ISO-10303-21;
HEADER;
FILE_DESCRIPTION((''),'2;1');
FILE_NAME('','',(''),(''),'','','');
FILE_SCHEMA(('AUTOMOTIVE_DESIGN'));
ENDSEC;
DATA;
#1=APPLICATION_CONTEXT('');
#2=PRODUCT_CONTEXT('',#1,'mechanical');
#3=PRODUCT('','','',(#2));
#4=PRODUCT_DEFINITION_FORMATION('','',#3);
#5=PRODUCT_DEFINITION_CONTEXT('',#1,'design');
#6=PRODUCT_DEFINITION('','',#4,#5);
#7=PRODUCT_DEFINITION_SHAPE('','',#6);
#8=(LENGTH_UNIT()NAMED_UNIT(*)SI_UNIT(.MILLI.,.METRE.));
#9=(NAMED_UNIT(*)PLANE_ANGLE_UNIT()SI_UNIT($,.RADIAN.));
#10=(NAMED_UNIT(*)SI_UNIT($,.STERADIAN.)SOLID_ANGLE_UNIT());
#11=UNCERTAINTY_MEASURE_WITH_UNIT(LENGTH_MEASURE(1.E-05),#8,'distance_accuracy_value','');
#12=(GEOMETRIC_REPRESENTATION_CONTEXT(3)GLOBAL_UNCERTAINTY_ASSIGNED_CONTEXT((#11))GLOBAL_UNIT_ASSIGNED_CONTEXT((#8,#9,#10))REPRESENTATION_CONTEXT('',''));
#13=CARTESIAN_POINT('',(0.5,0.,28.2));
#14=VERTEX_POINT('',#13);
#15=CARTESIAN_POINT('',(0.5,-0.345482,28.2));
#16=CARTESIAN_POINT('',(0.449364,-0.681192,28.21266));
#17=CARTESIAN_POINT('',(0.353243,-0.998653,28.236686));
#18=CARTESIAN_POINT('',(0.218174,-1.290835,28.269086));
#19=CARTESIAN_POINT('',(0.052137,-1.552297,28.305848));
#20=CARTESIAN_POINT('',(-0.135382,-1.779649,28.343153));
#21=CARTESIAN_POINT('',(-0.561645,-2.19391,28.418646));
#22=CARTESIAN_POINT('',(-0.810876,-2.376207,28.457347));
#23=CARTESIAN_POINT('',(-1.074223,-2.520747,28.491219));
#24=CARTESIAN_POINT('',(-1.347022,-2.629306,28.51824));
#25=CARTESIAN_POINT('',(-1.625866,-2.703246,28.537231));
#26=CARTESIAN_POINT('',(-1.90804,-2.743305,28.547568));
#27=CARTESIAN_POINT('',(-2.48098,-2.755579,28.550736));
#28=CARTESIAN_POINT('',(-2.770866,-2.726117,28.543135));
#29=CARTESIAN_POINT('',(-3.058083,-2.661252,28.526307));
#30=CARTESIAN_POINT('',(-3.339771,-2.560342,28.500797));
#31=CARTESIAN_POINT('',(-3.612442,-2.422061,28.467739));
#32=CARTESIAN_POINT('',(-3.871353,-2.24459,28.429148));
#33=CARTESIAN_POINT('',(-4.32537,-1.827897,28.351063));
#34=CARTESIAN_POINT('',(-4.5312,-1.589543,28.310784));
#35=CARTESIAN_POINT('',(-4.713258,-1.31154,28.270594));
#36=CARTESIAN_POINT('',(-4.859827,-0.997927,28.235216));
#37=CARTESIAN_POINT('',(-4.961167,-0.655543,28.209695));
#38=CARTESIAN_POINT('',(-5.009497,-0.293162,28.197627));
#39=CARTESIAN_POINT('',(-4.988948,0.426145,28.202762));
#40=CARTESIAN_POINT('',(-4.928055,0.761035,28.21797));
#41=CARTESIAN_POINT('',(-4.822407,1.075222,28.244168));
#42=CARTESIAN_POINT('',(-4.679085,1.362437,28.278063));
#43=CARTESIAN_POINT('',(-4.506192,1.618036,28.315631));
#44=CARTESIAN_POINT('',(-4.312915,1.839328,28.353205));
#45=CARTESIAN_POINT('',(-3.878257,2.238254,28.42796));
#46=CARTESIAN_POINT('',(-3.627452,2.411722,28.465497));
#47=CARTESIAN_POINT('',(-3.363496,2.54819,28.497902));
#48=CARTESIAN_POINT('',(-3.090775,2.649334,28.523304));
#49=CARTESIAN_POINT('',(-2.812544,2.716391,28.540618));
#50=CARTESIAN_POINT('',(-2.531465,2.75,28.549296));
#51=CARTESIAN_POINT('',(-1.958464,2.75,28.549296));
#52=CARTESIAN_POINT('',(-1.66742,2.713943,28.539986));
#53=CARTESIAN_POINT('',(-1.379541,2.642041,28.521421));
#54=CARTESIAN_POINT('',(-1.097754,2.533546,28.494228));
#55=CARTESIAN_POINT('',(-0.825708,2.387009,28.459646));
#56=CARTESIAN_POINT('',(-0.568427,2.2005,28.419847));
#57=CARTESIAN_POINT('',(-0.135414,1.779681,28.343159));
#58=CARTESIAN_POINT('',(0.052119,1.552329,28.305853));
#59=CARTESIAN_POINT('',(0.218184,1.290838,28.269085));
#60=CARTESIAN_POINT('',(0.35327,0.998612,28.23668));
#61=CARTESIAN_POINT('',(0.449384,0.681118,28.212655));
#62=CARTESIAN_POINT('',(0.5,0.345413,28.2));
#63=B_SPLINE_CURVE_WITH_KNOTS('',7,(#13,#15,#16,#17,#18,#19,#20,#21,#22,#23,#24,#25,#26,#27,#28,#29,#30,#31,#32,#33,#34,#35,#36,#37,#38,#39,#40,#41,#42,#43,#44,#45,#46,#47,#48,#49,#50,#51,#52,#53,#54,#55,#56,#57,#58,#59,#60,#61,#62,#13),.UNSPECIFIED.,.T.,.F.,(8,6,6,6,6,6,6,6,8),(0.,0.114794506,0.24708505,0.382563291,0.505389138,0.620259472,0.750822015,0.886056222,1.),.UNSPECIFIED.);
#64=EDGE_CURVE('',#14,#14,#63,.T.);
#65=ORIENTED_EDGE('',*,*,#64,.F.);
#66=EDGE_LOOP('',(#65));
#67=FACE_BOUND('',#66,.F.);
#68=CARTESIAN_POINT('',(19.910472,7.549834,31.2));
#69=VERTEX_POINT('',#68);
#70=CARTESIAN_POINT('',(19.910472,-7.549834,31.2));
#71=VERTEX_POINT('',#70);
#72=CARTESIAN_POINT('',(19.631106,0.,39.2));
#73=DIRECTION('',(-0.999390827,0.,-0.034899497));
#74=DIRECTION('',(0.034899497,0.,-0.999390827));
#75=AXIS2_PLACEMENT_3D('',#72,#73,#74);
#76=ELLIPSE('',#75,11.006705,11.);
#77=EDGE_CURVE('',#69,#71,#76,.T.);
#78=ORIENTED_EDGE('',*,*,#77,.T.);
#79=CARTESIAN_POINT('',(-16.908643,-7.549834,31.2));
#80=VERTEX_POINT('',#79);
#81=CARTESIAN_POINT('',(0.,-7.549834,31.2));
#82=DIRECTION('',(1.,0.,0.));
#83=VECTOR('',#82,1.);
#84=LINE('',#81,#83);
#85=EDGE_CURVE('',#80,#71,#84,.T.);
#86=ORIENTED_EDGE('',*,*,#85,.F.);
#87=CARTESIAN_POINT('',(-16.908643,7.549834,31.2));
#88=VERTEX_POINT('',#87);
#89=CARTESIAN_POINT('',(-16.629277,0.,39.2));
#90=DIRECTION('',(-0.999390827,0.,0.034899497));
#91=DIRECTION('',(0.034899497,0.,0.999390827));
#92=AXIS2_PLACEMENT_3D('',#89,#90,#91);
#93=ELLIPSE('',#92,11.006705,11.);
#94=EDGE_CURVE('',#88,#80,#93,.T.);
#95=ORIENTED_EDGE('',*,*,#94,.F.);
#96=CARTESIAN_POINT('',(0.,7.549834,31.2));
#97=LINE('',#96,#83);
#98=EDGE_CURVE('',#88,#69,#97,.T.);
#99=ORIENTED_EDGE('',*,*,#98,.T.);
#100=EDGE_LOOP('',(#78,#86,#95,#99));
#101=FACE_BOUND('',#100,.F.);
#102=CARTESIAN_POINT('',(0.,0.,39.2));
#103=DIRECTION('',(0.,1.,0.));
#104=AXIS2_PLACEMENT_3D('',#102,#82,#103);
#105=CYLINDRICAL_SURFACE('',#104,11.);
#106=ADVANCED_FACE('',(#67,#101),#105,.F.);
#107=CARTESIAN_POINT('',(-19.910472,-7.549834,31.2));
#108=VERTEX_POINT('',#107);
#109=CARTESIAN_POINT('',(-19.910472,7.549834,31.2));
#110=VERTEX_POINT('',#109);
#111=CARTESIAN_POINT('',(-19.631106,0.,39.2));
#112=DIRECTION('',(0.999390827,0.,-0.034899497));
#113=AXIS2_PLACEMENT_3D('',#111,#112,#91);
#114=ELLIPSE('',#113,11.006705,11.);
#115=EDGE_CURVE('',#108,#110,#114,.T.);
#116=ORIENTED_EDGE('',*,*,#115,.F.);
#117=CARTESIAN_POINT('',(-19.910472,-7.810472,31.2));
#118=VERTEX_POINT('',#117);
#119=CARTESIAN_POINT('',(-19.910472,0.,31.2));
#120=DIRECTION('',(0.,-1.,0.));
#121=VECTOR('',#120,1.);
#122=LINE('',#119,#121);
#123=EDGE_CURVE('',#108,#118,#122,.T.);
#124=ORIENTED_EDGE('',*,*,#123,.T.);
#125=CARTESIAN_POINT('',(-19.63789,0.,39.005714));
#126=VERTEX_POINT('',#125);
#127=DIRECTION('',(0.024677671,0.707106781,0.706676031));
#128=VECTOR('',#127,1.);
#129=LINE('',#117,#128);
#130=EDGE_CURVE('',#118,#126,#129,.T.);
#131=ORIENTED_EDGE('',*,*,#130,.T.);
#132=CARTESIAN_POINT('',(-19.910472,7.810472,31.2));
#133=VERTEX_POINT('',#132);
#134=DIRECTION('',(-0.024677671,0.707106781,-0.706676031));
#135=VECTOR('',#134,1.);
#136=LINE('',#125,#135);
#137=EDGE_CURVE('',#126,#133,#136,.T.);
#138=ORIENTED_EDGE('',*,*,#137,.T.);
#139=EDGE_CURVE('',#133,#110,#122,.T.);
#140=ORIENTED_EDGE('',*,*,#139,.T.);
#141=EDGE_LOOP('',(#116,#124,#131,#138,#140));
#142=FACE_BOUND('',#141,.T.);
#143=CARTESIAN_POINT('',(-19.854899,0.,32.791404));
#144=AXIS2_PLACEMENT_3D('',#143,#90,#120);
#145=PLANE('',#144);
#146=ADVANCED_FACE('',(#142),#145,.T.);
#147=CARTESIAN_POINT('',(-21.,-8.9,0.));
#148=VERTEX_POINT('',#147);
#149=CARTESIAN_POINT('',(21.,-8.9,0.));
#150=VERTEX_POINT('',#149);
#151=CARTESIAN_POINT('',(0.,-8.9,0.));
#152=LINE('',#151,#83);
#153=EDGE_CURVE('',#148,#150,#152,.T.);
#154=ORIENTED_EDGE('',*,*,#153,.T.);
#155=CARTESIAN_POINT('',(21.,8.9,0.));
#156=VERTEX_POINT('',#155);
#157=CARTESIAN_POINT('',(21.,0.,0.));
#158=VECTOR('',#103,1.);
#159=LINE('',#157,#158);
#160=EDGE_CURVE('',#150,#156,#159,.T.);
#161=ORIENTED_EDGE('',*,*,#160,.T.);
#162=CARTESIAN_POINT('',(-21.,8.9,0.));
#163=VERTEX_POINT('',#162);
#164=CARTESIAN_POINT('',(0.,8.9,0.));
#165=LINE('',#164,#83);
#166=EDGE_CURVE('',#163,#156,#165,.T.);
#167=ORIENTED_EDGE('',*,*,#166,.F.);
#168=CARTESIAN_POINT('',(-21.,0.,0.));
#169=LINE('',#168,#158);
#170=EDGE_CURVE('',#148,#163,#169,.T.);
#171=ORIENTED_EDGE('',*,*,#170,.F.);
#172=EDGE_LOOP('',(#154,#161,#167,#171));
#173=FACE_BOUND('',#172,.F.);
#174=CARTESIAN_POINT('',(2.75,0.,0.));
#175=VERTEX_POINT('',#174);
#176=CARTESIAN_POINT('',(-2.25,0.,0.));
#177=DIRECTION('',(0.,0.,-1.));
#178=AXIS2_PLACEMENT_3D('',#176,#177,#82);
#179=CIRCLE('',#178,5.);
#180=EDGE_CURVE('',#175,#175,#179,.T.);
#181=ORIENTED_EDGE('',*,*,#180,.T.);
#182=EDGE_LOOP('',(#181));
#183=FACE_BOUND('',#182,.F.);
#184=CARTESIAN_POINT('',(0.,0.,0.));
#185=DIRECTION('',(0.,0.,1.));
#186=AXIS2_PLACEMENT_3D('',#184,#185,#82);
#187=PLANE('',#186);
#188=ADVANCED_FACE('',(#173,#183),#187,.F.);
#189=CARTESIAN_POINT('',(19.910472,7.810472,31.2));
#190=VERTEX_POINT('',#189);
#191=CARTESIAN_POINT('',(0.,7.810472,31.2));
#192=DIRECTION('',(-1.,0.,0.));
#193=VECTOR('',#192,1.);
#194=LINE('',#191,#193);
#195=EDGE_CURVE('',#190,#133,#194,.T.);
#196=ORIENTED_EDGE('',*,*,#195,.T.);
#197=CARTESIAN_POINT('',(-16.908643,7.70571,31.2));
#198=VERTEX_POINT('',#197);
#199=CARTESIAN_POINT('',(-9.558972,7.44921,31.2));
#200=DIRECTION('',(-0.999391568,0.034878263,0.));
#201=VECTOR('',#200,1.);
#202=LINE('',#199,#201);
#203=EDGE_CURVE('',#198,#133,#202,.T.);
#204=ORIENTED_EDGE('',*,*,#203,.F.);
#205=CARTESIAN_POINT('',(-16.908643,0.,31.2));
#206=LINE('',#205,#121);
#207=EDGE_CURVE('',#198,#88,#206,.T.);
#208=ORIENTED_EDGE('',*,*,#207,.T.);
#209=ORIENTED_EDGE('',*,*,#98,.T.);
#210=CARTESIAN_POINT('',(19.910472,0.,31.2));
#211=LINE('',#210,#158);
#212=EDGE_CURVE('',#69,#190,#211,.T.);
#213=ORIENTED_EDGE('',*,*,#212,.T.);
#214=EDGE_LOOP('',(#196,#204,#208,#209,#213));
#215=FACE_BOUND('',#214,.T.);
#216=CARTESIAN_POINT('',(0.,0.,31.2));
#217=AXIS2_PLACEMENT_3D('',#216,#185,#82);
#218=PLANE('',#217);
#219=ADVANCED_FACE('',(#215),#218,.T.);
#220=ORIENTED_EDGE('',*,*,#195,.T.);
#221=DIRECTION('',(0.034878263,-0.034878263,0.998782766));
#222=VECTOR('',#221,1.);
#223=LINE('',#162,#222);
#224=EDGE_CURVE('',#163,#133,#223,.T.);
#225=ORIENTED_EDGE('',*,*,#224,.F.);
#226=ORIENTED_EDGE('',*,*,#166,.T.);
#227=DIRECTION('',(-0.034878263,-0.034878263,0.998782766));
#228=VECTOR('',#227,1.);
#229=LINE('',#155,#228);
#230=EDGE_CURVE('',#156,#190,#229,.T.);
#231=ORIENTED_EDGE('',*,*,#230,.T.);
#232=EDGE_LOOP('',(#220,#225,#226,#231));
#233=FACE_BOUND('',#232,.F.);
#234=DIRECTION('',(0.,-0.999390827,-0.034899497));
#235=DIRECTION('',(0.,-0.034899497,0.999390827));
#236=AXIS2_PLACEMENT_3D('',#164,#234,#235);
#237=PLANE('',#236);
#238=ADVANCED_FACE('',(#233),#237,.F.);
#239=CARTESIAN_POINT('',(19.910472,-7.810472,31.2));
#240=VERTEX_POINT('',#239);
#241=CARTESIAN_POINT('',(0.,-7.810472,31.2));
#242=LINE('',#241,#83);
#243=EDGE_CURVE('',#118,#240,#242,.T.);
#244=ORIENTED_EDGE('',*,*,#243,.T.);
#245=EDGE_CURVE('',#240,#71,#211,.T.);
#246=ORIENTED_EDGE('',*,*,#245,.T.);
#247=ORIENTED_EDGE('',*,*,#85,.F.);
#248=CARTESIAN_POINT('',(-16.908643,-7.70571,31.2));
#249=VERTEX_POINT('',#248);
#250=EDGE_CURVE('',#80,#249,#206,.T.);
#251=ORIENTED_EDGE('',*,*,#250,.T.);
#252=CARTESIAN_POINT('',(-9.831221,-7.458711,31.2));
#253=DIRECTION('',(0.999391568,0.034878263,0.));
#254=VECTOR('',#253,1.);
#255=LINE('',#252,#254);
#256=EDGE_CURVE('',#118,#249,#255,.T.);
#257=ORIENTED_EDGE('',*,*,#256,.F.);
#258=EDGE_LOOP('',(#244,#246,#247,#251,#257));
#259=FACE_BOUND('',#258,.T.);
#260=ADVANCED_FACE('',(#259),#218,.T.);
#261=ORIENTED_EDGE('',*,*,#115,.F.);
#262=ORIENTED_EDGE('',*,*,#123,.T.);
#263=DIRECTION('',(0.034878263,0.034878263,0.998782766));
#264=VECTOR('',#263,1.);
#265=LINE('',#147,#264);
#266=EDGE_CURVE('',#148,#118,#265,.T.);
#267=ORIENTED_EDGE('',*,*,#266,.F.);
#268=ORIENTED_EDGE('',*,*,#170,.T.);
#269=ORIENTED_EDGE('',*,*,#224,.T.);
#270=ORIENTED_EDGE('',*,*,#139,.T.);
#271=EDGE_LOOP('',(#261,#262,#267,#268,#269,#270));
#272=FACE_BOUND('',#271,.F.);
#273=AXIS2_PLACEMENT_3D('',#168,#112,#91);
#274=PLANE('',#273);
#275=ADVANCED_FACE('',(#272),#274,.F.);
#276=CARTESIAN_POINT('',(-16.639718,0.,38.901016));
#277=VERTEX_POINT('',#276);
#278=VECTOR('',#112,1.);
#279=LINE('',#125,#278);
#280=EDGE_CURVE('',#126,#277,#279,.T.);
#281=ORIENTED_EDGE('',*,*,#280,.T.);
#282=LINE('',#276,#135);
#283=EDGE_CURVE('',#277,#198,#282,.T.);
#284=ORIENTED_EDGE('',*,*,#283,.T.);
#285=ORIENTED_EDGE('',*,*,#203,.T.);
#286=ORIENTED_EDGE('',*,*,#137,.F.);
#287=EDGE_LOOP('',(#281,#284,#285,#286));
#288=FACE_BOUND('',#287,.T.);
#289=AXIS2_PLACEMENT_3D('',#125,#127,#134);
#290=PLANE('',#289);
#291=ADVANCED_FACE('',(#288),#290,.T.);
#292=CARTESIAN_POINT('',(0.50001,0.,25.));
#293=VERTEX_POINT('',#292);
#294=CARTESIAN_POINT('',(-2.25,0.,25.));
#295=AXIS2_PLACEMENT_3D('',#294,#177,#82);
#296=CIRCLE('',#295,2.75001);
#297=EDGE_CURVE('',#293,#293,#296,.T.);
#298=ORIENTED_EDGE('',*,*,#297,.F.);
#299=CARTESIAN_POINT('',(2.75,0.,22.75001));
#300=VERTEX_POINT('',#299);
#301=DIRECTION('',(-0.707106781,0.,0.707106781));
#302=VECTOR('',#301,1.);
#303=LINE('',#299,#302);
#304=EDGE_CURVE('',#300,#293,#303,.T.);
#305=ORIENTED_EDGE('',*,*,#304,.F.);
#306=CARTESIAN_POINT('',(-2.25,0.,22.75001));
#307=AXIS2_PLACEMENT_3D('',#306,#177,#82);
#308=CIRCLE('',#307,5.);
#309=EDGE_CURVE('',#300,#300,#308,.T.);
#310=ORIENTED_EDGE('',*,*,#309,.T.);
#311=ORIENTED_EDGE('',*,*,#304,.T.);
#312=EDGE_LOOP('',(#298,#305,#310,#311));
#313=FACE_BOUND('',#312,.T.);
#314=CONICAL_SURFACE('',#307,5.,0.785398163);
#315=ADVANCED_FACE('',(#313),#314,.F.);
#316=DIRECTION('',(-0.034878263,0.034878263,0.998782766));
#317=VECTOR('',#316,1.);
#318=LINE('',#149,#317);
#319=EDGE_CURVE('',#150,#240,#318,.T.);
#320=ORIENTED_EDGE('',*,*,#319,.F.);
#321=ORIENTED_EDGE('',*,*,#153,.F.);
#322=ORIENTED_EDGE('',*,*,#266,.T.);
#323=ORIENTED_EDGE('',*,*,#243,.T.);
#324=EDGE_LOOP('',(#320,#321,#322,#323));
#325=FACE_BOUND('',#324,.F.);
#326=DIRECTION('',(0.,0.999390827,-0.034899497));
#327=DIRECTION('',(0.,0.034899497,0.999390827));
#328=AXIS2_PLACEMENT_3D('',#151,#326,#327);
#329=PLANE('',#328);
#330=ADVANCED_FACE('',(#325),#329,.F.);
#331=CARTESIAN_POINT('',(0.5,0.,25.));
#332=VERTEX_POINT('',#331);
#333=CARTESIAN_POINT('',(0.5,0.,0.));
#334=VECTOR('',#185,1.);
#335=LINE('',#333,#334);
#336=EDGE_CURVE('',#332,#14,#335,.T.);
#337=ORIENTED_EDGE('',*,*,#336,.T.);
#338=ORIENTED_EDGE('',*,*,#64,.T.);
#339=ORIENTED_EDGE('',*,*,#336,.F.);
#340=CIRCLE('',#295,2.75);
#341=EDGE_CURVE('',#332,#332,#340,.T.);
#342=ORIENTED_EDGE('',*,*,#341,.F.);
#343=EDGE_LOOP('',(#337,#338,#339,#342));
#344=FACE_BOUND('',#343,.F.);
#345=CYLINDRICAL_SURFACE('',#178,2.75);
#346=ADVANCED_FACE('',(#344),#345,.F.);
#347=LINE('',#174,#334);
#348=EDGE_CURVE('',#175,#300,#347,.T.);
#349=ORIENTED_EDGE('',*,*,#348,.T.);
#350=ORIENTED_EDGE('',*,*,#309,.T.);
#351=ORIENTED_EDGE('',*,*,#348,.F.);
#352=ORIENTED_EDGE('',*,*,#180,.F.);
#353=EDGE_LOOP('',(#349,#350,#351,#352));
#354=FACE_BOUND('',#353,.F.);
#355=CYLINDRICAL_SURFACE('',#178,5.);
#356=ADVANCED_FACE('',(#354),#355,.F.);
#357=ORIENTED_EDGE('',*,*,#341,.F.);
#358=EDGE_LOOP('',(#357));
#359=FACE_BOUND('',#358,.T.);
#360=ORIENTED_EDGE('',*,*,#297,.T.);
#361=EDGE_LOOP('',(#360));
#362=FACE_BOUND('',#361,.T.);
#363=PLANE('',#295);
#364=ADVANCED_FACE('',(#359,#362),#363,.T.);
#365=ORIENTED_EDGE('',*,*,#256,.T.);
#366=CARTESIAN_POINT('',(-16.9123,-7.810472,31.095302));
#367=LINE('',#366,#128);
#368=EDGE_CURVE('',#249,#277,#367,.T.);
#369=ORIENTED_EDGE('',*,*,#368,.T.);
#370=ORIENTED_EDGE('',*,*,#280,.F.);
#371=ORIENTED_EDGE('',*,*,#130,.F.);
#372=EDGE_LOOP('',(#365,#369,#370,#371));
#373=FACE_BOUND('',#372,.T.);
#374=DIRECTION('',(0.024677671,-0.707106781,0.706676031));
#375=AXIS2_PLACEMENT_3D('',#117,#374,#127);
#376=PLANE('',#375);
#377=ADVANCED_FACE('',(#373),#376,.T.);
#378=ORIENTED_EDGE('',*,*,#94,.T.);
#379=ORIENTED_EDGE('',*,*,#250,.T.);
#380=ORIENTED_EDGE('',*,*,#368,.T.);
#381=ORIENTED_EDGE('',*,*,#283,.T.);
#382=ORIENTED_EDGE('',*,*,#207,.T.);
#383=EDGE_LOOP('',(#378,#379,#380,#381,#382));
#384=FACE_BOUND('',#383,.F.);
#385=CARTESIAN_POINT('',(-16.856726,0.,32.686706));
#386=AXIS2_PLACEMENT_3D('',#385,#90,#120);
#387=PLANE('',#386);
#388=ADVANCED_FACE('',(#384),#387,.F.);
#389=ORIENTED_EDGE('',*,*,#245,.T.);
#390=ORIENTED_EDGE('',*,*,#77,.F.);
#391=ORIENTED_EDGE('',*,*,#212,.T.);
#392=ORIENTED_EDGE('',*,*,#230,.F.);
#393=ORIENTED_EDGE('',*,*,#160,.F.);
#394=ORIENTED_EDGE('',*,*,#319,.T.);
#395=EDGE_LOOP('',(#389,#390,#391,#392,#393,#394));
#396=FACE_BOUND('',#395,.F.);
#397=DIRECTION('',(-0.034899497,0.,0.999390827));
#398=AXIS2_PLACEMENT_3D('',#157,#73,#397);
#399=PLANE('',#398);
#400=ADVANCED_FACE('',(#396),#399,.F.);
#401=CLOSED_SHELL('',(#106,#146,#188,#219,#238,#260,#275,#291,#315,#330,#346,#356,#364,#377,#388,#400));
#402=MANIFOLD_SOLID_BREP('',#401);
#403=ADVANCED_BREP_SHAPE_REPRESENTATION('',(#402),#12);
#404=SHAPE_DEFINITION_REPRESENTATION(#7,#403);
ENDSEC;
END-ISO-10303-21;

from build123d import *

# Parameters (mm, degrees)
F0_W     = 42
F0_H     = 17.8
F1_DEPTH = 31.2
F1_TAPER = 2
F2_R     = 11
F3_DEPTH = 25
F5_DEPTH = 3
F6_R     = 2.75
F7_DEPTH = 39.0067140634
F8_R     = 5
F8_R_2   = 2.75
F9_DEPTH = 25
F10_SIZE = 2.24999


# Not quite as in the source:
# - a fillet or chamfer is up to 0.001 mm smaller than in the source, because OpenCascade refuses the exact size


with BuildPart() as f1:
    # F0 (on Top) → F1 (new body)
    with BuildSketch(Plane.XY):
        Rectangle(F0_W, F0_H)
    extrude(amount=F1_DEPTH, taper=F1_TAPER)

    # F2 (on Right) → F3 (cut, symmetric)
    with BuildSketch(Plane.YZ):
        with Locations((0, 39.2)):
            Circle(F2_R)
    extrude(amount=F3_DEPTH, both=True, mode=Mode.SUBTRACT)

    # F4 (on face) → F5 (join)
    with BuildSketch(Plane(origin=(-20.9744225277, 0, 0.7324429743), x_dir=(0, -1, 0), z_dir=(-0.999390827, 0, 0.0348994967))):
        with BuildLine():
            Line((0, 38.2966003432), (-7.8104719919, 30.4861283514))
            Line((-7.8104719919, 30.4861283514), (-7.5498344353, 30.4861283514))
            add(Edge.make_bspline(
                [(7.5498344353, 30.4861283514), (0, 23.3567853482), (-7.5498344353, 30.4861283514)],
                knots=[2.3851362689, 2.3851362689, 2.3851362689, 3.8980490383, 3.8980490383, 3.8980490383], degree=2, weights=[1, 0.7272727273, 1]))
            Line((7.5498344353, 30.4861283514), (7.8104719919, 30.4861283514))
            Line((7.8104719919, 30.4861283514), (0, 38.2966003432))
        make_face()
    extrude(amount=-F5_DEPTH)

    # F6 (on face) → F7 (cut, through all)
    with BuildSketch(Plane(origin=(0, 0, 0), x_dir=(1, 0, 0), z_dir=(0, 0, -1))):
        with Locations((-2.25, 0)):
            Circle(F6_R)
    extrude(amount=-F7_DEPTH, mode=Mode.SUBTRACT)

    # F8 (on face) → F9 (cut)
    with BuildSketch(Plane(origin=(0, 0, 0), x_dir=(1, 0, 0), z_dir=(0, 0, -1))):
        with Locations((-2.25, 0)):
            Circle(F8_R)
        with Locations((-2.25, 0)):
            Circle(F8_R_2, mode=Mode.SUBTRACT)
    extrude(amount=-F9_DEPTH, mode=Mode.SUBTRACT)

    # F10 (size 2.25 in the source; OpenCascade refuses exactly that, so slightly less here)
    f10_edges = [f1.edges().sort_by_distance(p)[0] for p in [
        (-7.25, 0, 25),
    ]]
    chamfer(f10_edges, length=F10_SIZE)


solid = f1.part
